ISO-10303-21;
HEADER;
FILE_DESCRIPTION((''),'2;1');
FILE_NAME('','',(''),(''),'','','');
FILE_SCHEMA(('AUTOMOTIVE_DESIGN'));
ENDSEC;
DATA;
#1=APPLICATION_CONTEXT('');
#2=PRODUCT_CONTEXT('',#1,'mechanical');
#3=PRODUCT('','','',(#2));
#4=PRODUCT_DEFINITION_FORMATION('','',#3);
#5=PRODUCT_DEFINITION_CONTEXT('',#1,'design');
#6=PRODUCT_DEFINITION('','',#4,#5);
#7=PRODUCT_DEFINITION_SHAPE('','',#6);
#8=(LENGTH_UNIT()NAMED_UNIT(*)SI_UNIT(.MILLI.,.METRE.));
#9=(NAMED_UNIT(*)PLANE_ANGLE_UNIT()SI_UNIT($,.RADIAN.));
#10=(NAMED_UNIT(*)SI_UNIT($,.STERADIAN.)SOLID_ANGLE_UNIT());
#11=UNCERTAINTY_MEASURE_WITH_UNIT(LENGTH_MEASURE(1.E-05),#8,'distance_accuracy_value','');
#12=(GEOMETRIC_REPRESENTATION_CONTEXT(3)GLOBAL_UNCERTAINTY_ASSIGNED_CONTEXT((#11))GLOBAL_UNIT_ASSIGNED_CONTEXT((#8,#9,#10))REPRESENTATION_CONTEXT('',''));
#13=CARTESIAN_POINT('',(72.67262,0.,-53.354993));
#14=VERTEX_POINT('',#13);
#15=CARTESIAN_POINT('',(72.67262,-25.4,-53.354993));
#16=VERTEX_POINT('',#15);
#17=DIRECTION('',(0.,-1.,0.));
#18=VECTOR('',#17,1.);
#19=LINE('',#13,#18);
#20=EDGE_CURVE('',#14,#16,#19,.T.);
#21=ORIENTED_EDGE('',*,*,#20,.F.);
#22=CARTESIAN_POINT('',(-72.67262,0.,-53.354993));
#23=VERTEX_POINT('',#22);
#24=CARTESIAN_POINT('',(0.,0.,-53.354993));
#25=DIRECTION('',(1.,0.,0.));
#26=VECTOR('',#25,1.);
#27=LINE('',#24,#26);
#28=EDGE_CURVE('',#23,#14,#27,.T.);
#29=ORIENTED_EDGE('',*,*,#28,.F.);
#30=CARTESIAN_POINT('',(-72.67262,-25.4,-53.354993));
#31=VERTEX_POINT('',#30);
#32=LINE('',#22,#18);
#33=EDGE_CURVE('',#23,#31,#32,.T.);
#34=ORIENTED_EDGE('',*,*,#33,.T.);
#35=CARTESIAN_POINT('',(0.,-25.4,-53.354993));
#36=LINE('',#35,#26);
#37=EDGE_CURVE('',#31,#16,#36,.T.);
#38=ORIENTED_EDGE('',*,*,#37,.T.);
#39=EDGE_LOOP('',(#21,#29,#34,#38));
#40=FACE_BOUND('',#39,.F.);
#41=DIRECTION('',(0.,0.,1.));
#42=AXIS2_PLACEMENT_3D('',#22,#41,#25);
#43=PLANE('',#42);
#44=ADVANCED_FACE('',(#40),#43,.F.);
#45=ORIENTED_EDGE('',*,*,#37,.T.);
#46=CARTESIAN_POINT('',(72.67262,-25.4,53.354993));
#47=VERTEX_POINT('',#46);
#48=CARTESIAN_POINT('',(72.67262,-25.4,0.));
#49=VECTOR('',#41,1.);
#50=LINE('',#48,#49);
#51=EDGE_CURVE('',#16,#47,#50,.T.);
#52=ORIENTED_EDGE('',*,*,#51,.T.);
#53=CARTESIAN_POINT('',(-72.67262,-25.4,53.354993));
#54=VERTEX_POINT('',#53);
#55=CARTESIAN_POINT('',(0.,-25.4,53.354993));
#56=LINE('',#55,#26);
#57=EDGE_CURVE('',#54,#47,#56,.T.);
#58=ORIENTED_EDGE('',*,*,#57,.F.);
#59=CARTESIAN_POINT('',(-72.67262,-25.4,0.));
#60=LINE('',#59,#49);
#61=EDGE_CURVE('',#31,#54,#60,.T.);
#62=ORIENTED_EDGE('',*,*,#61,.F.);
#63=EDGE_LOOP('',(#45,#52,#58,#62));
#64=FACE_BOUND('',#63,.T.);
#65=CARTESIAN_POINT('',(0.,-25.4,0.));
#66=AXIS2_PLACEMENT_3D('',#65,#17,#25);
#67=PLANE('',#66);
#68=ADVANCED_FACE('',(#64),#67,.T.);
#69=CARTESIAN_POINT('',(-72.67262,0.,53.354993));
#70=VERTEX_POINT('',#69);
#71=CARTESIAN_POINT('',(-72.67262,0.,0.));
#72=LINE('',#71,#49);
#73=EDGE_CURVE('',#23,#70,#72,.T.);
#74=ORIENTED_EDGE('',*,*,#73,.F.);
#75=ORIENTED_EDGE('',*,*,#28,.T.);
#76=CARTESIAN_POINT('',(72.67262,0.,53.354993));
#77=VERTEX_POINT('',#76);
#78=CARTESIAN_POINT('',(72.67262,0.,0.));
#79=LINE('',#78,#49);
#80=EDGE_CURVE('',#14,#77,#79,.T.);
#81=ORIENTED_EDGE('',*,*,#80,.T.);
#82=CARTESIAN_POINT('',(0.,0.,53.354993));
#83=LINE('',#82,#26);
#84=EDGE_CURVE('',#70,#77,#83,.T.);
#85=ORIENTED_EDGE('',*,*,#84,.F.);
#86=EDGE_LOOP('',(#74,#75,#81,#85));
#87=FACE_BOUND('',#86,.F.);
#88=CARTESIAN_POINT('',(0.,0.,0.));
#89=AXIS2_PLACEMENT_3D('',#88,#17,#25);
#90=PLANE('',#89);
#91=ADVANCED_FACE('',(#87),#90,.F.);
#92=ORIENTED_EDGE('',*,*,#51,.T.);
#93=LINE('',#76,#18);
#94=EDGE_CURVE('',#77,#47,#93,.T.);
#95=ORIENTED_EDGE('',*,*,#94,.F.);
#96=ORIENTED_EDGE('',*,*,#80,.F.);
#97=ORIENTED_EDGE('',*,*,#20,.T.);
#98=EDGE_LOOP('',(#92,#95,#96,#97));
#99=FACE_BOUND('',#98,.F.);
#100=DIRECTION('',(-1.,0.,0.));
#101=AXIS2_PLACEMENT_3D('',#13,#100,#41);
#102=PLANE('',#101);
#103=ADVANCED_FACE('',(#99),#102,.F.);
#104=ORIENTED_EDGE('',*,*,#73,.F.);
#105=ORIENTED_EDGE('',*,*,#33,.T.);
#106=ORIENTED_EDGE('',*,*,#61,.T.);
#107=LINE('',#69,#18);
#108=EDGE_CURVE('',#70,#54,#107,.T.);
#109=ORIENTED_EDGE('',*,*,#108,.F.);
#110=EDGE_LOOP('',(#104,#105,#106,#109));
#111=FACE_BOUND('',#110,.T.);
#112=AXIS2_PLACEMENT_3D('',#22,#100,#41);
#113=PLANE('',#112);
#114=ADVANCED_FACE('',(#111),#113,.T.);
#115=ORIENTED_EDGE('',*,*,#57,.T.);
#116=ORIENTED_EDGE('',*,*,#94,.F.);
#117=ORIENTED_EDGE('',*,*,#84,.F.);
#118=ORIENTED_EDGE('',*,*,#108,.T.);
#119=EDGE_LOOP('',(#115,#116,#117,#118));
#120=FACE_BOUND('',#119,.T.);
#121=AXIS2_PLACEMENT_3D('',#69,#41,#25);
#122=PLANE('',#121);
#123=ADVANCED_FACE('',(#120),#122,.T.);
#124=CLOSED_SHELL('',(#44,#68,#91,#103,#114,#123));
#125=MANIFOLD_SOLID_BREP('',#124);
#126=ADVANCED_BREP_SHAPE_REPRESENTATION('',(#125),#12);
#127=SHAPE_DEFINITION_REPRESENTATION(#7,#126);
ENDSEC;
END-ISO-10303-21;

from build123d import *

# Parameters (mm, degrees)
F0_W     = 145.3452408314
F0_H     = 106.7099869251
F1_DEPTH = 25.4


# Not quite as in the source:
# - the program builds the solid bodies; features that only make, move or delete a surface that nothing else refers to are left out


with BuildPart() as f1:
    # F0 (on Front) → F1 (new body)
    with BuildSketch(Plane.XZ):
        Rectangle(F0_W, F0_H)
    extrude(amount=F1_DEPTH)


solid = f1.part
